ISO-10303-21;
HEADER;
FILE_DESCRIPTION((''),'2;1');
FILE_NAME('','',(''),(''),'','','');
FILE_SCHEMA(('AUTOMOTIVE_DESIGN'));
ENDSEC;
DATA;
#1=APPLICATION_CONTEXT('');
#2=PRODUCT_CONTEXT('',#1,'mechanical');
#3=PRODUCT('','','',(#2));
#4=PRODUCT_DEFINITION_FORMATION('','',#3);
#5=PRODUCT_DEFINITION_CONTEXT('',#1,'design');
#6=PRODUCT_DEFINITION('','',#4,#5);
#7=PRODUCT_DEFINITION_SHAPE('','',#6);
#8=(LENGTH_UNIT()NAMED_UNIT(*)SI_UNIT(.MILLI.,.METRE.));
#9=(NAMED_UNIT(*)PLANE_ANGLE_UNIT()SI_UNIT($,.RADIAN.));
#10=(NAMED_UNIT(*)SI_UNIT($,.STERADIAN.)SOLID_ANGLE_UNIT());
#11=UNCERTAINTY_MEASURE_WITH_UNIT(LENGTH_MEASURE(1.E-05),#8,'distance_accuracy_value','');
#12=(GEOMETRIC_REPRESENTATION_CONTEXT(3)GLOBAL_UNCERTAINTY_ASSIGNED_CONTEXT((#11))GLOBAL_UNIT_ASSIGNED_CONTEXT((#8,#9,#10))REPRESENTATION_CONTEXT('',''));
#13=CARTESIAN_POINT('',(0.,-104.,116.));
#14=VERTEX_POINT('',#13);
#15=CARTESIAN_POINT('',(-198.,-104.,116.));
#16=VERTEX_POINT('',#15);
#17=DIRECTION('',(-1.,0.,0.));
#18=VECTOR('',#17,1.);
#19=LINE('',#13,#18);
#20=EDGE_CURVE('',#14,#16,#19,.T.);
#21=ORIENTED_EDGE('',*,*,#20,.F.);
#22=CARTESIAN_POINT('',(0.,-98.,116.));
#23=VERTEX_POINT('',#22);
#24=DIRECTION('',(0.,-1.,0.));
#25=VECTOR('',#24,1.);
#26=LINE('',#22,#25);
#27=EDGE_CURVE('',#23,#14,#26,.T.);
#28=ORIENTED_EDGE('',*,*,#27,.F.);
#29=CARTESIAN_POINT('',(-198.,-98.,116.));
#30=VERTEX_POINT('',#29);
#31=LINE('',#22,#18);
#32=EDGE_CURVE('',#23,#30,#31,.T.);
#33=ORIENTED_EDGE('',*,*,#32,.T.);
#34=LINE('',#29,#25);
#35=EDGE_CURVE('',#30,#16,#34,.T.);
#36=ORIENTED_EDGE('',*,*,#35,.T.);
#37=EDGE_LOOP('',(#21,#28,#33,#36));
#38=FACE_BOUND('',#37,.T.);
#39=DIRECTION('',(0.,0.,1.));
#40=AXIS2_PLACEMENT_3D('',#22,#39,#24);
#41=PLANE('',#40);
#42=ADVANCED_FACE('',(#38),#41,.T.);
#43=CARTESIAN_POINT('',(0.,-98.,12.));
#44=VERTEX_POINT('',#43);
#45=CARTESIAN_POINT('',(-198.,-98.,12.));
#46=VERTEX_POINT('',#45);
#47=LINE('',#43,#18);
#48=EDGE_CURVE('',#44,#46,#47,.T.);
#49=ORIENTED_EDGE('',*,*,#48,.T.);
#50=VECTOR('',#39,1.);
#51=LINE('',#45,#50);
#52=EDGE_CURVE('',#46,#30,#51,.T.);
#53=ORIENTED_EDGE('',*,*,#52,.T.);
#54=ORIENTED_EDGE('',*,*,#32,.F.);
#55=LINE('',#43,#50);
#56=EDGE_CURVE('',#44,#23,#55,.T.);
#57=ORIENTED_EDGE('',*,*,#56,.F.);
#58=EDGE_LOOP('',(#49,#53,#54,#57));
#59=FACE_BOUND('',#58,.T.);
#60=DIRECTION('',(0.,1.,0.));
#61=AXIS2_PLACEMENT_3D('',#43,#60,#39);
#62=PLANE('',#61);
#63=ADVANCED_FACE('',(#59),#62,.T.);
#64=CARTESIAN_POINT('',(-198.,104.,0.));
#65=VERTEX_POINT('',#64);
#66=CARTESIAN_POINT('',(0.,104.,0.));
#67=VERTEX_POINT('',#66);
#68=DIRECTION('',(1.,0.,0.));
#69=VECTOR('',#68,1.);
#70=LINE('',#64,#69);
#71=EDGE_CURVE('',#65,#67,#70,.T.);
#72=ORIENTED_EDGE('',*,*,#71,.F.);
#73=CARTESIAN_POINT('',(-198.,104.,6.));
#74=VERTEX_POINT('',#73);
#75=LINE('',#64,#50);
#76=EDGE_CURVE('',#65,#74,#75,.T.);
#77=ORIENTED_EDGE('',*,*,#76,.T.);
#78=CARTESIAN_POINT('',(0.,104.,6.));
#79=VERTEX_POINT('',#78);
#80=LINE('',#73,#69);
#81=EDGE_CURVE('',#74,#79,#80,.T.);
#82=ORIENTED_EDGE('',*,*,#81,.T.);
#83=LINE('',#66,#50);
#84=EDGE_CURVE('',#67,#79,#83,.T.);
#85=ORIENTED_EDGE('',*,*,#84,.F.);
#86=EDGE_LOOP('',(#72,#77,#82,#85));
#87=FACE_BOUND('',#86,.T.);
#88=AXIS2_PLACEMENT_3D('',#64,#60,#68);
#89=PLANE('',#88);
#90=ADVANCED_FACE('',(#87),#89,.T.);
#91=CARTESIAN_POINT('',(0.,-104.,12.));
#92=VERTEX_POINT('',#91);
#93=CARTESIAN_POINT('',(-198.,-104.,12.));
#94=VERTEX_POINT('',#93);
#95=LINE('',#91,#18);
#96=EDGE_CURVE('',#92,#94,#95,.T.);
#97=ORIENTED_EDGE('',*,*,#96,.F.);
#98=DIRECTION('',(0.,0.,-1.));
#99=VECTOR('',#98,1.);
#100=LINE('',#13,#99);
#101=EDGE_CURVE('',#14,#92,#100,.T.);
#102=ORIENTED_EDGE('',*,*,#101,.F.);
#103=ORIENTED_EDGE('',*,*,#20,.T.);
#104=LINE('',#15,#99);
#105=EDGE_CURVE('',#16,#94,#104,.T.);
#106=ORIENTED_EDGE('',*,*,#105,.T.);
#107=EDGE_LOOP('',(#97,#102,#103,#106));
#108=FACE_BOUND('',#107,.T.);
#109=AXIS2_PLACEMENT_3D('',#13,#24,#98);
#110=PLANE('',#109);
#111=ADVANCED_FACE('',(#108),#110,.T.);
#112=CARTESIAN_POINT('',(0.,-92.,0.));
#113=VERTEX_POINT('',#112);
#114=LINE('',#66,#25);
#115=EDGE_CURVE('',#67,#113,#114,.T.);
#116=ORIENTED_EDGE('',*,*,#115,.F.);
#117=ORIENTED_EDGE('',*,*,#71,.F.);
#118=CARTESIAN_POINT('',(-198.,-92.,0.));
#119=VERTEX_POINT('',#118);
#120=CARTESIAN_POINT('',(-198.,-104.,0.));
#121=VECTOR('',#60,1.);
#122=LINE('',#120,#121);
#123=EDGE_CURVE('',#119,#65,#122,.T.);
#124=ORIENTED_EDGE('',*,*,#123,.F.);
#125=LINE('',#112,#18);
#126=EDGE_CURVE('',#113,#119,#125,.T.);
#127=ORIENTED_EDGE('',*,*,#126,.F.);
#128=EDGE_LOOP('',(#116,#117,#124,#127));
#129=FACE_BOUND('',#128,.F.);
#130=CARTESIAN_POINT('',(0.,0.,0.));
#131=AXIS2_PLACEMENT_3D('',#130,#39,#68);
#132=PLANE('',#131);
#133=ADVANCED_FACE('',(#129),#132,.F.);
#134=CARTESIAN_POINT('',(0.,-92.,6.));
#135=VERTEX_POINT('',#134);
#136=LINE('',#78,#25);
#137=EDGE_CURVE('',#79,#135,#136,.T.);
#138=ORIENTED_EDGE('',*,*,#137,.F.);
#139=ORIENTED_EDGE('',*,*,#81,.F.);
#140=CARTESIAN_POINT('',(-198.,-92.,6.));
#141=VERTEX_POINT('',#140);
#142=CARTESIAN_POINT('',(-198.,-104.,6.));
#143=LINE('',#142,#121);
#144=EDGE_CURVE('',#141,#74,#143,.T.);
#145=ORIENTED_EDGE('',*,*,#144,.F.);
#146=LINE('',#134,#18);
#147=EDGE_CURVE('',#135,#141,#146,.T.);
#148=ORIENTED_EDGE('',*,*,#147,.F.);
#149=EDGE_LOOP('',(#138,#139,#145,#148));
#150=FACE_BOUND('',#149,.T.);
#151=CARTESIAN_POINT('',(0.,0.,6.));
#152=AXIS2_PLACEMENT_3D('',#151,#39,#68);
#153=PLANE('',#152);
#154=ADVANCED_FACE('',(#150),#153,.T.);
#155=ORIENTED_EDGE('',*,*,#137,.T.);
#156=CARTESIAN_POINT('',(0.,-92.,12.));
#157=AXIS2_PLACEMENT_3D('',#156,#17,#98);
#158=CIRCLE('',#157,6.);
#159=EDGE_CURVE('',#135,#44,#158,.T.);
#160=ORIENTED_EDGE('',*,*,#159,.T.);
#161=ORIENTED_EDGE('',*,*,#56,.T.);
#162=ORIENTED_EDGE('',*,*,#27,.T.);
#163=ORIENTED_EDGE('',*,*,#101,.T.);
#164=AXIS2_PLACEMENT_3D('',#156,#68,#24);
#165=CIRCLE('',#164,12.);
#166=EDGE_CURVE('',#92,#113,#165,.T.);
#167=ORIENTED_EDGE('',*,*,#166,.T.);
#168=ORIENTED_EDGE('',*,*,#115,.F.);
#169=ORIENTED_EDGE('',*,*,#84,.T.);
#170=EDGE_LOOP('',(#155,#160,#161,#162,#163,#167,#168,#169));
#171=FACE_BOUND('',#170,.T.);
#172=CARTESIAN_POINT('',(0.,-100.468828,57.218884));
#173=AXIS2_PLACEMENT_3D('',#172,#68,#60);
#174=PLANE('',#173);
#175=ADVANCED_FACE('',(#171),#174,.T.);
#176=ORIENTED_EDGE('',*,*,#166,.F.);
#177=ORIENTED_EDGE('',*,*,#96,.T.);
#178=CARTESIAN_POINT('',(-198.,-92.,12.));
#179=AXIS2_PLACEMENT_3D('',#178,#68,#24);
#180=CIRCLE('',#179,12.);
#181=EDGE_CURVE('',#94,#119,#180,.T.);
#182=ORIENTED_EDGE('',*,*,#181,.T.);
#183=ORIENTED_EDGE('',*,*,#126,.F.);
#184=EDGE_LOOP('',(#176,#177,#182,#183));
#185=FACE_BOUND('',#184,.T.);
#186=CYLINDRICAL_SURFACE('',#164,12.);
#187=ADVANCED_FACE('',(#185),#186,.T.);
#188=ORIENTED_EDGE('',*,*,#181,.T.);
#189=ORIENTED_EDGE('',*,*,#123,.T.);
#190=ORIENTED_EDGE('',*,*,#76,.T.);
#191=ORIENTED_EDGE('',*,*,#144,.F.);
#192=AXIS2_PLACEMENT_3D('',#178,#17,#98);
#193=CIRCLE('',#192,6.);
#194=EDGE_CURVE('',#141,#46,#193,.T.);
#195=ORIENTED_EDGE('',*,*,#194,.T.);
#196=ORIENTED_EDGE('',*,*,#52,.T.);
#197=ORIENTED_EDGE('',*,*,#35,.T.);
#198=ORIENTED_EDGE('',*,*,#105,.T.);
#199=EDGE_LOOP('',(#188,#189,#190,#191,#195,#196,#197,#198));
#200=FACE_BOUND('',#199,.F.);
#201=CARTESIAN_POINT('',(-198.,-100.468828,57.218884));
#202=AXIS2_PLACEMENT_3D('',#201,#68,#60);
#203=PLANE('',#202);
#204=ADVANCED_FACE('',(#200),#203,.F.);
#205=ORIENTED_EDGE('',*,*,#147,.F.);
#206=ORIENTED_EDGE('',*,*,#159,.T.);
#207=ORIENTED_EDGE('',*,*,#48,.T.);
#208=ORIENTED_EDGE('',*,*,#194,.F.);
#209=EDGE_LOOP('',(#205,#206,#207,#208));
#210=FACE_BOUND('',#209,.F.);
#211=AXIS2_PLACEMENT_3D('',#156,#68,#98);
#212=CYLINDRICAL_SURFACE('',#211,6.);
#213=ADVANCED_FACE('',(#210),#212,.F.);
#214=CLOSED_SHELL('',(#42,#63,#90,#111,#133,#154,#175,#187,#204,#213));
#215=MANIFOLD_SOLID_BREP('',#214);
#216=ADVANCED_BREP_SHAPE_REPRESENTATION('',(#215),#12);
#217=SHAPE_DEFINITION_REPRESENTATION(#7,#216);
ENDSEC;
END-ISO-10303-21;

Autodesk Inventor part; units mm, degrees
ref_plane "YZ Plane" through (0, 0, 0) normal (1, 0, 0) x (0, 1, 0)
ref_plane "XZ Plane" through (0, 0, 0) normal (0, 1, 0) x (-1, 0, 0)
sketch "Sketch2" plane through (0, 0, 0) normal (0, 0, 1) x (1, 0, 0)
  line L0 (0, -104) -> (-198, -104)
  line L1 (-198, -104) -> (-198, 104)
  line L2 (-198, 104) -> (0, 104)
  line L3 (0, 104) -> (0, -104)
  point P0 (0, 99)
  point P1 (0, -99)
  point P2 (0, 0)
  dimension "d29" = 198
  dimension "d30" = 208
  dimension "d31" = 5
  dimension "d32" = 5
extrude "Plate2" add sketch "Sketch2" along normal blind 6
sketch "Sketch5" plane through (0, -98, 0) normal (0, -1, 0) x (1, 0, 0)
  line L0 (-198, 0) -> (0, 0)
  line L1 (0, 0) -> (0, 116)
  line L2 (0, 116) -> (-198, 116)
  line L3 (-198, 116) -> (-198, 0)
edge flange "Flange1" height 116 angle 90 thickness 6 bend radius 6 thickness toward (0, -1, 0) relief round relief width 6 relief depth 3 edges at (-99, -104, 6) wall of the first edge with corners at (-198, -98, 0) (0, -98, 0) (0, -98, 116) (-198, -98, 116)
bend "Bend1"
corner "Corner1"
ref_plane "Work Plane2" through (0, -98, 116) normal (0.5, 0, 0.8660254) x (0, -1, 0)
equation "\"d30\" = ChargingHatch_width"
equation "\"d14\" = Thickness"
equation "\"d34\" = BendReliefWidth"
equation "\"d35\" = BendReliefDepth"
equation "\"d36\" = MinimumRemnant"
equation "\"d37\" = TransitionRadius"
equation "\"d38\" = ChargingHatch_hight - Thickness"
equation "\"d40\" = BendRadius"
equation "\"d41\" = CornerReliefSize"
equation "\"d42\" = GapSize"
equation "\"d43\" = JacobiRadiusSize"
equation "\"d32\" = d31"
equation "\"BendReliefWidth\" = Thickness"
equation "\"BendReliefDepth\" = 0.5 * Thickness"
equation "\"CornerReliefSize\" = 4 * Thickness"
equation "\"MinimumRemnant\" = 2 * Thickness"
equation "\"TransitionRadius\" = BendRadius"
equation "\"JacobiRadiusSize\" = BendRadius"
equation "\"GapSize\" = Thickness"
equation "\"ChargingHatch_width\" = 208"
equation "\"Thickness\" = 6"
equation "\"ChargingHatch_hight\" = 122"
equation "\"BendRadius\" = 6"
properties part number "PRS 9672 charging tube 2_D1200 940" material "Steel"
